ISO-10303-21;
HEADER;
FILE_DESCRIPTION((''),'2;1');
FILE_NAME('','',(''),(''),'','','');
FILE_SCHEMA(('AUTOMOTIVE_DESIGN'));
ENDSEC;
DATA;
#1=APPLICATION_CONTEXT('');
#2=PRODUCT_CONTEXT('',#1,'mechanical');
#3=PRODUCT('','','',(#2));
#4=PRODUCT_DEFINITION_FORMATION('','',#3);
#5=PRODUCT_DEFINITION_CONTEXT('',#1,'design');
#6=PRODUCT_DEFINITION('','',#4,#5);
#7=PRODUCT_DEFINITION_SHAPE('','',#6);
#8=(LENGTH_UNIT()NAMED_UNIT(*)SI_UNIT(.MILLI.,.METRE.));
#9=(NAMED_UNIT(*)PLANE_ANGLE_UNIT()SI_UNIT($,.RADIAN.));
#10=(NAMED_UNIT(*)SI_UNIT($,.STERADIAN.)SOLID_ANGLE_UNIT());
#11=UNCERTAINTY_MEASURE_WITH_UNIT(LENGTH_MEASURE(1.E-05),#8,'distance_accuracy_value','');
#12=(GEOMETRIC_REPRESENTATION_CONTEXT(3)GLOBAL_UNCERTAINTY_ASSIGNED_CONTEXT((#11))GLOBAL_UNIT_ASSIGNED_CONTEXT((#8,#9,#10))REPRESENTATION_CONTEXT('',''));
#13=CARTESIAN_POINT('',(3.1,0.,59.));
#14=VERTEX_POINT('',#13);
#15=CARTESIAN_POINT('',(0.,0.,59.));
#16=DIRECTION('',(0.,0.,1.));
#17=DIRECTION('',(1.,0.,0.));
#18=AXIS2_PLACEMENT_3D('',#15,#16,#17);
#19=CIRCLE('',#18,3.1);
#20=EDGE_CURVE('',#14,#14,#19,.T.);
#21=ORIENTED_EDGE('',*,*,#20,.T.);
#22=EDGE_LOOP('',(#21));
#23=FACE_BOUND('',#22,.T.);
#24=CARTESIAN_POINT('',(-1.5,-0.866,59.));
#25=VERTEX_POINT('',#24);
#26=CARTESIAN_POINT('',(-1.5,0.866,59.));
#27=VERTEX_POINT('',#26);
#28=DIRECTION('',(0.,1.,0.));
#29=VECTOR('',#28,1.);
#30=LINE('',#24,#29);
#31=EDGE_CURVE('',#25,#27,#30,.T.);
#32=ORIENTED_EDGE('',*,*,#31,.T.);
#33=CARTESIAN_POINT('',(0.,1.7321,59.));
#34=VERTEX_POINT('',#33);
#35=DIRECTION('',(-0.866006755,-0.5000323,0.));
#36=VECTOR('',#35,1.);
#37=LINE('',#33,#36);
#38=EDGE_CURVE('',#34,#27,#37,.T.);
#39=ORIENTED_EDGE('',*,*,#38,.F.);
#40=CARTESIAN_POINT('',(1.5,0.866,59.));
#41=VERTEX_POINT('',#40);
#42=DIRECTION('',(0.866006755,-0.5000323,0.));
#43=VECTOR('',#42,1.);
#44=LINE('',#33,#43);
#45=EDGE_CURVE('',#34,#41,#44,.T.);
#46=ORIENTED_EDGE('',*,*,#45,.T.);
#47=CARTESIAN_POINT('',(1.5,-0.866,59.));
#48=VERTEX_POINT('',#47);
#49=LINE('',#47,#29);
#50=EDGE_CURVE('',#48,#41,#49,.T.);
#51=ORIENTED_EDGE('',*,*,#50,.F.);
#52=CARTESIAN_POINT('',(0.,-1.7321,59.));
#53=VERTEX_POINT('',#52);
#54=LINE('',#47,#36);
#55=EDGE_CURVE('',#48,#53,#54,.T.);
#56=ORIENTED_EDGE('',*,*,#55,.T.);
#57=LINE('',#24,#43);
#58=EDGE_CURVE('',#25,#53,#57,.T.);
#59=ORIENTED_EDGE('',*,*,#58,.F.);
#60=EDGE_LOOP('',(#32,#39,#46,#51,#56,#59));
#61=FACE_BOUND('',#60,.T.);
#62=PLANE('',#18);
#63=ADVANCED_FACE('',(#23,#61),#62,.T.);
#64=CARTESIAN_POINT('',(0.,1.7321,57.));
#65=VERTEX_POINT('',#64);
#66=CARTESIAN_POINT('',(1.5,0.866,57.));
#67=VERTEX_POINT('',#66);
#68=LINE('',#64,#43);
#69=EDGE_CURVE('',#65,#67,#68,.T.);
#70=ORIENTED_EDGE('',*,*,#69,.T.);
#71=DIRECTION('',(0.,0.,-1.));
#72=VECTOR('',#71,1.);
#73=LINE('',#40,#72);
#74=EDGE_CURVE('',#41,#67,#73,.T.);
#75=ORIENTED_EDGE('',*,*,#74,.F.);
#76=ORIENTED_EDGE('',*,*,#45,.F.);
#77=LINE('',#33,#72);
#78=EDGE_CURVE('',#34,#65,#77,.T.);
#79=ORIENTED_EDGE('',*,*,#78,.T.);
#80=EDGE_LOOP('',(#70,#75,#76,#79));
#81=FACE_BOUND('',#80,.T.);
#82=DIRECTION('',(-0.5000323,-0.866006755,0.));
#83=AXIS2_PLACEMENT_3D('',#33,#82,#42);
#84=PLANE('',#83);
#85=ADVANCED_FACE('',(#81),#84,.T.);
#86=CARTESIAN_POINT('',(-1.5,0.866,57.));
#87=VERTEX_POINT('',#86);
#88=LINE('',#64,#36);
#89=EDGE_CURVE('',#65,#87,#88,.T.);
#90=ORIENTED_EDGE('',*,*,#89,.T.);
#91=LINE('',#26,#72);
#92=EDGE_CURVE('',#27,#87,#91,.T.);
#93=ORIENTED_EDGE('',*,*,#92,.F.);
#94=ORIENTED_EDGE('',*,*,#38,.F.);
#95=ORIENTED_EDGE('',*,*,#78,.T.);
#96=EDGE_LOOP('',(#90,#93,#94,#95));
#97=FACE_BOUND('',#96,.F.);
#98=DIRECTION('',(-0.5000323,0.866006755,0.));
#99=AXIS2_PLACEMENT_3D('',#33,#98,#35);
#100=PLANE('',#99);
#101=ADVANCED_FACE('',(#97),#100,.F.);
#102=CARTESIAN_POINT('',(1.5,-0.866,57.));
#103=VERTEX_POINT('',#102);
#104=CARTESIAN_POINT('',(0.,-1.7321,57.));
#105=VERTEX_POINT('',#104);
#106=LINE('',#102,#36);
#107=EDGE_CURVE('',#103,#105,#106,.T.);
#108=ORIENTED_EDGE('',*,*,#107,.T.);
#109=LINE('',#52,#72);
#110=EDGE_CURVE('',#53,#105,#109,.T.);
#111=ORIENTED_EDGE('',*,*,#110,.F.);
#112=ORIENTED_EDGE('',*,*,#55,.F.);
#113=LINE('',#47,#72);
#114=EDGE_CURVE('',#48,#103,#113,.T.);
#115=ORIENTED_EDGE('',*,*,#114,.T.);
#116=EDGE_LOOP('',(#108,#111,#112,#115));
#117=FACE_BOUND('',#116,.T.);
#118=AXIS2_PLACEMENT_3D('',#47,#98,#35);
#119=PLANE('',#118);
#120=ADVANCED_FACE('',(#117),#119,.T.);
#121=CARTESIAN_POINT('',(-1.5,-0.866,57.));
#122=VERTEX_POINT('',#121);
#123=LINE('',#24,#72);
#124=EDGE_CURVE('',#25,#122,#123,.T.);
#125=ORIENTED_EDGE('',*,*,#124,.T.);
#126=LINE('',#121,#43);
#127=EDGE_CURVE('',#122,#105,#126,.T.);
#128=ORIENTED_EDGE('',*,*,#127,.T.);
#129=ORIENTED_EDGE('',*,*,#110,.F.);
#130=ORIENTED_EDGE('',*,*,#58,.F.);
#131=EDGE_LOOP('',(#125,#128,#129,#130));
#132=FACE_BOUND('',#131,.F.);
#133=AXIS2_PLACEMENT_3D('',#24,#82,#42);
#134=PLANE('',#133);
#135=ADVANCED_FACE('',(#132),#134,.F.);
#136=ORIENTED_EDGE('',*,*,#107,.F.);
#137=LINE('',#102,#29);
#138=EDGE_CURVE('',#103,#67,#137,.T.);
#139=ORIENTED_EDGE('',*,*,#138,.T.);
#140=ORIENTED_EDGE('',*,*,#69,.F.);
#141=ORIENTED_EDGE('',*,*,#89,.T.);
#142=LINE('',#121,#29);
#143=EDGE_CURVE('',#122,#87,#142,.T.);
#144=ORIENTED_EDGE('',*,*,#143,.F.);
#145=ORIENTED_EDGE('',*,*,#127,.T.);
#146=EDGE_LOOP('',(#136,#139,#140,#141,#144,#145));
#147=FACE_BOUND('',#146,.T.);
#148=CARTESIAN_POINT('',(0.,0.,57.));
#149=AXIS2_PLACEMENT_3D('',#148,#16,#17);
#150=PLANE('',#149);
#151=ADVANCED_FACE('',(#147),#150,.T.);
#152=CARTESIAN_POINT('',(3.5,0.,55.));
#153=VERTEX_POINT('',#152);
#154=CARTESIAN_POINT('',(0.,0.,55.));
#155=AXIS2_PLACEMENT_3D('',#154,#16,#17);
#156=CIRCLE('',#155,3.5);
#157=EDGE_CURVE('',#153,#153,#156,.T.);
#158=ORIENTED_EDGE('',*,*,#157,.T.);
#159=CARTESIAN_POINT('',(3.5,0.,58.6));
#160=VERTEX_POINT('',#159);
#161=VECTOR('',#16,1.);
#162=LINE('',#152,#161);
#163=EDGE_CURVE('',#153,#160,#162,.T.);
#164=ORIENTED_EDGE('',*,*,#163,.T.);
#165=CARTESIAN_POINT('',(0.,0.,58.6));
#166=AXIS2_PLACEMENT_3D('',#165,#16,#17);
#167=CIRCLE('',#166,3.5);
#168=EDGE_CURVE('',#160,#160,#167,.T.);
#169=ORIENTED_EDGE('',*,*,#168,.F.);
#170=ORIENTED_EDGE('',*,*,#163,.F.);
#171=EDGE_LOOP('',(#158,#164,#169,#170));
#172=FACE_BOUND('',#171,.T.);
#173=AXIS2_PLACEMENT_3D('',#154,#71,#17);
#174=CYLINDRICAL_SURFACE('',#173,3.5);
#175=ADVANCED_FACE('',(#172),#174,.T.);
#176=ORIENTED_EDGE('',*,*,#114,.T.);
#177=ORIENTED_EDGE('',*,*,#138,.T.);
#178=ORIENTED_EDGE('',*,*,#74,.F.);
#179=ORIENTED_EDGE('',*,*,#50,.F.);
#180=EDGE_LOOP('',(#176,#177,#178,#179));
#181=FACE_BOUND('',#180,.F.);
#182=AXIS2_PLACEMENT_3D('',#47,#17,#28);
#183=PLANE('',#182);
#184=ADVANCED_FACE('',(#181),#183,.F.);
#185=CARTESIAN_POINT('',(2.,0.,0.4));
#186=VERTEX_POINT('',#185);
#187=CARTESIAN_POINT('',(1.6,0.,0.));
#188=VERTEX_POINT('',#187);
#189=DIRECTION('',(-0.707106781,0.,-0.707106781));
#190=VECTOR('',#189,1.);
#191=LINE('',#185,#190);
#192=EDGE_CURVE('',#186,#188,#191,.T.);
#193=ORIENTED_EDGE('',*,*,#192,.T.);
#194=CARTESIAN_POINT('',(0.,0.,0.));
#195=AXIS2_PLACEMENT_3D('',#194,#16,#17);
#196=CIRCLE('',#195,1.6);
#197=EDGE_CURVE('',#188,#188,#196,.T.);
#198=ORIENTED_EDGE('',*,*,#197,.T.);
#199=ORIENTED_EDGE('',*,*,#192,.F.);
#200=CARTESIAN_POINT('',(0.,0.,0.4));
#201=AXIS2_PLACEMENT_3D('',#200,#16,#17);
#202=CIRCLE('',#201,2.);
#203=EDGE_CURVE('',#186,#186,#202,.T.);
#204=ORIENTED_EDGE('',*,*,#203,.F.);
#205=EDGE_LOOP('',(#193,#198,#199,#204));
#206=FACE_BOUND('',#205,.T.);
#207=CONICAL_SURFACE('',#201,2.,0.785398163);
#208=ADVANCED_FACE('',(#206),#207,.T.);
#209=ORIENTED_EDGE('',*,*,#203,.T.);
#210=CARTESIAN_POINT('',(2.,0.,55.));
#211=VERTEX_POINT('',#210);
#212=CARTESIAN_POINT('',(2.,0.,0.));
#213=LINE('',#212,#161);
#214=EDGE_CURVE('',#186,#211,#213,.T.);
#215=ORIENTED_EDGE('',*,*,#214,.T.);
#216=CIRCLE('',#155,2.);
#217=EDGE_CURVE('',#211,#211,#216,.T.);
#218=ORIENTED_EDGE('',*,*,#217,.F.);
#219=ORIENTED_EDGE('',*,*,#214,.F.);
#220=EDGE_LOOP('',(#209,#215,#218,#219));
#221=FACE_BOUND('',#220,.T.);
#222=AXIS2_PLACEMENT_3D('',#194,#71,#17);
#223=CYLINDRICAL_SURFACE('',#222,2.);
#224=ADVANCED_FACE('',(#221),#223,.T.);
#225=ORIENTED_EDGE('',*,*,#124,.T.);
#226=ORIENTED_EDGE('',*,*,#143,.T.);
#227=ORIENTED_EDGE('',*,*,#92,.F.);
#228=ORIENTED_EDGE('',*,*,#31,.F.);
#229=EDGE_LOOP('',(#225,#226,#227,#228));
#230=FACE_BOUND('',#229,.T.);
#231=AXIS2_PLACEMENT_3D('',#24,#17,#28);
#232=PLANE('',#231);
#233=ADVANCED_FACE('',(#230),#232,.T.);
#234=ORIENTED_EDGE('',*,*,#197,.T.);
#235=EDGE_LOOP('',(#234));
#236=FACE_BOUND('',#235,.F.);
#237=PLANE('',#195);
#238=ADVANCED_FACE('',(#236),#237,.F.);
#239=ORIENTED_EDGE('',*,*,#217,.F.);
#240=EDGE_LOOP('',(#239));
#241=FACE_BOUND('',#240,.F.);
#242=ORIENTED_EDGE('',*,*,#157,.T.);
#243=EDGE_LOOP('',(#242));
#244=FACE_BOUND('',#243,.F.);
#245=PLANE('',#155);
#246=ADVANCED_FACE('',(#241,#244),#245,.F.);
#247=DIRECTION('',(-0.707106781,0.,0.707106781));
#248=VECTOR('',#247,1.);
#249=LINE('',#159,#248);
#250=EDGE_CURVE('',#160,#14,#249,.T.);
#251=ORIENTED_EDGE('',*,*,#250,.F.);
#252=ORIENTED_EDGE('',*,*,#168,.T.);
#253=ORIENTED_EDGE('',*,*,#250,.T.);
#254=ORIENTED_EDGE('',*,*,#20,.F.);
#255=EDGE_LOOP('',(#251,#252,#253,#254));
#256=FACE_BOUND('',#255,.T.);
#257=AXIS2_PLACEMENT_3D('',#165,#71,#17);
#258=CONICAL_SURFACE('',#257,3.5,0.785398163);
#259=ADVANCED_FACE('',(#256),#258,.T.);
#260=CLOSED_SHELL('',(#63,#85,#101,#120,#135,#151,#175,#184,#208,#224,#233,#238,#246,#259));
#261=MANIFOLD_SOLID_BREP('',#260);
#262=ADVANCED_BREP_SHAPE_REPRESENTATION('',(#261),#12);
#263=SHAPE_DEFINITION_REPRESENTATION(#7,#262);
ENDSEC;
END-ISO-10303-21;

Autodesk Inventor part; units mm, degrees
ref_plane "YZ Plane" through (0, 0, 0) normal (1, 0, 0) x (0, 1, 0)
ref_plane "XZ Plane" through (0, 0, 0) normal (0, 1, 0) x (-1, 0, 0)
ref_plane "XY Plane" through (0, 0, 0) normal (0, 0, 1) x (1, 0, 0)
sketch "Sketch1" plane through (0, 0, 0) normal (0, 0, 1) x (1, 0, 0)
  circle A0 centre (0, 0) radius 2
  dimension "Diameter" = 4
extrude "Extrusion1" add sketch "Sketch1" along normal blind 55
sketch "Sketch2" plane through (0, 0, 55) normal (0, 0, 1) x (1, 0, 0)
  circle A0 centre (0, 0) radius 2 projected
  circle A1 centre (0, 0) radius 3.5
  dimension "Head_Diameter" = 7
extrude "Extrusion2" add sketch "Sketch2" along normal blind 4 contours A0 | A1
sketch "Sketch3" plane through (0, 0, 59) normal (0, 0, 1) x (1, 0, 0)
  circle A0 centre (0, 0) radius 3.5 projected
  circle A1 centre (0, 0) radius 1.7321 construction
  line L0 (0, 1.7321) -> (1.5, 0.866)
  line L1 (1.5, -0.866) -> (1.5, 0.866)
  line L2 (0, 1.7321) -> (-1.5, 0.866)
  line L3 (-1.5, -0.866) -> (-1.5, 0.866)
  line L4 (-1.5, -0.866) -> (0, -1.7321)
  line L5 (1.5, -0.866) -> (0, -1.7321)
  dimension "Hex_Width" = 3
extrude "Extrusion3" cut sketch "Sketch3" against normal blind 2 contours L0 L1 L5 L4 L3 L2
thread "Thread1" size "M4x0.7" class "4g6g" standard "ANSI Metric M Profile" length 20
chamfer "Chamfer1" distance 0.4 angle 45 2 edges at (-3.5, 0, 59) (-2, 0, 0)
equation "\"d9\" = ThreadLength"
equation "\"d12\" = Chamfer"
equation "\"ThreadLength\" = 20"
equation "\"Chamfer\" = 0.4"
properties part number "SCREW, SOCKET HD, P, 12_9, M4X0_7X55" material "Steel, MS"
